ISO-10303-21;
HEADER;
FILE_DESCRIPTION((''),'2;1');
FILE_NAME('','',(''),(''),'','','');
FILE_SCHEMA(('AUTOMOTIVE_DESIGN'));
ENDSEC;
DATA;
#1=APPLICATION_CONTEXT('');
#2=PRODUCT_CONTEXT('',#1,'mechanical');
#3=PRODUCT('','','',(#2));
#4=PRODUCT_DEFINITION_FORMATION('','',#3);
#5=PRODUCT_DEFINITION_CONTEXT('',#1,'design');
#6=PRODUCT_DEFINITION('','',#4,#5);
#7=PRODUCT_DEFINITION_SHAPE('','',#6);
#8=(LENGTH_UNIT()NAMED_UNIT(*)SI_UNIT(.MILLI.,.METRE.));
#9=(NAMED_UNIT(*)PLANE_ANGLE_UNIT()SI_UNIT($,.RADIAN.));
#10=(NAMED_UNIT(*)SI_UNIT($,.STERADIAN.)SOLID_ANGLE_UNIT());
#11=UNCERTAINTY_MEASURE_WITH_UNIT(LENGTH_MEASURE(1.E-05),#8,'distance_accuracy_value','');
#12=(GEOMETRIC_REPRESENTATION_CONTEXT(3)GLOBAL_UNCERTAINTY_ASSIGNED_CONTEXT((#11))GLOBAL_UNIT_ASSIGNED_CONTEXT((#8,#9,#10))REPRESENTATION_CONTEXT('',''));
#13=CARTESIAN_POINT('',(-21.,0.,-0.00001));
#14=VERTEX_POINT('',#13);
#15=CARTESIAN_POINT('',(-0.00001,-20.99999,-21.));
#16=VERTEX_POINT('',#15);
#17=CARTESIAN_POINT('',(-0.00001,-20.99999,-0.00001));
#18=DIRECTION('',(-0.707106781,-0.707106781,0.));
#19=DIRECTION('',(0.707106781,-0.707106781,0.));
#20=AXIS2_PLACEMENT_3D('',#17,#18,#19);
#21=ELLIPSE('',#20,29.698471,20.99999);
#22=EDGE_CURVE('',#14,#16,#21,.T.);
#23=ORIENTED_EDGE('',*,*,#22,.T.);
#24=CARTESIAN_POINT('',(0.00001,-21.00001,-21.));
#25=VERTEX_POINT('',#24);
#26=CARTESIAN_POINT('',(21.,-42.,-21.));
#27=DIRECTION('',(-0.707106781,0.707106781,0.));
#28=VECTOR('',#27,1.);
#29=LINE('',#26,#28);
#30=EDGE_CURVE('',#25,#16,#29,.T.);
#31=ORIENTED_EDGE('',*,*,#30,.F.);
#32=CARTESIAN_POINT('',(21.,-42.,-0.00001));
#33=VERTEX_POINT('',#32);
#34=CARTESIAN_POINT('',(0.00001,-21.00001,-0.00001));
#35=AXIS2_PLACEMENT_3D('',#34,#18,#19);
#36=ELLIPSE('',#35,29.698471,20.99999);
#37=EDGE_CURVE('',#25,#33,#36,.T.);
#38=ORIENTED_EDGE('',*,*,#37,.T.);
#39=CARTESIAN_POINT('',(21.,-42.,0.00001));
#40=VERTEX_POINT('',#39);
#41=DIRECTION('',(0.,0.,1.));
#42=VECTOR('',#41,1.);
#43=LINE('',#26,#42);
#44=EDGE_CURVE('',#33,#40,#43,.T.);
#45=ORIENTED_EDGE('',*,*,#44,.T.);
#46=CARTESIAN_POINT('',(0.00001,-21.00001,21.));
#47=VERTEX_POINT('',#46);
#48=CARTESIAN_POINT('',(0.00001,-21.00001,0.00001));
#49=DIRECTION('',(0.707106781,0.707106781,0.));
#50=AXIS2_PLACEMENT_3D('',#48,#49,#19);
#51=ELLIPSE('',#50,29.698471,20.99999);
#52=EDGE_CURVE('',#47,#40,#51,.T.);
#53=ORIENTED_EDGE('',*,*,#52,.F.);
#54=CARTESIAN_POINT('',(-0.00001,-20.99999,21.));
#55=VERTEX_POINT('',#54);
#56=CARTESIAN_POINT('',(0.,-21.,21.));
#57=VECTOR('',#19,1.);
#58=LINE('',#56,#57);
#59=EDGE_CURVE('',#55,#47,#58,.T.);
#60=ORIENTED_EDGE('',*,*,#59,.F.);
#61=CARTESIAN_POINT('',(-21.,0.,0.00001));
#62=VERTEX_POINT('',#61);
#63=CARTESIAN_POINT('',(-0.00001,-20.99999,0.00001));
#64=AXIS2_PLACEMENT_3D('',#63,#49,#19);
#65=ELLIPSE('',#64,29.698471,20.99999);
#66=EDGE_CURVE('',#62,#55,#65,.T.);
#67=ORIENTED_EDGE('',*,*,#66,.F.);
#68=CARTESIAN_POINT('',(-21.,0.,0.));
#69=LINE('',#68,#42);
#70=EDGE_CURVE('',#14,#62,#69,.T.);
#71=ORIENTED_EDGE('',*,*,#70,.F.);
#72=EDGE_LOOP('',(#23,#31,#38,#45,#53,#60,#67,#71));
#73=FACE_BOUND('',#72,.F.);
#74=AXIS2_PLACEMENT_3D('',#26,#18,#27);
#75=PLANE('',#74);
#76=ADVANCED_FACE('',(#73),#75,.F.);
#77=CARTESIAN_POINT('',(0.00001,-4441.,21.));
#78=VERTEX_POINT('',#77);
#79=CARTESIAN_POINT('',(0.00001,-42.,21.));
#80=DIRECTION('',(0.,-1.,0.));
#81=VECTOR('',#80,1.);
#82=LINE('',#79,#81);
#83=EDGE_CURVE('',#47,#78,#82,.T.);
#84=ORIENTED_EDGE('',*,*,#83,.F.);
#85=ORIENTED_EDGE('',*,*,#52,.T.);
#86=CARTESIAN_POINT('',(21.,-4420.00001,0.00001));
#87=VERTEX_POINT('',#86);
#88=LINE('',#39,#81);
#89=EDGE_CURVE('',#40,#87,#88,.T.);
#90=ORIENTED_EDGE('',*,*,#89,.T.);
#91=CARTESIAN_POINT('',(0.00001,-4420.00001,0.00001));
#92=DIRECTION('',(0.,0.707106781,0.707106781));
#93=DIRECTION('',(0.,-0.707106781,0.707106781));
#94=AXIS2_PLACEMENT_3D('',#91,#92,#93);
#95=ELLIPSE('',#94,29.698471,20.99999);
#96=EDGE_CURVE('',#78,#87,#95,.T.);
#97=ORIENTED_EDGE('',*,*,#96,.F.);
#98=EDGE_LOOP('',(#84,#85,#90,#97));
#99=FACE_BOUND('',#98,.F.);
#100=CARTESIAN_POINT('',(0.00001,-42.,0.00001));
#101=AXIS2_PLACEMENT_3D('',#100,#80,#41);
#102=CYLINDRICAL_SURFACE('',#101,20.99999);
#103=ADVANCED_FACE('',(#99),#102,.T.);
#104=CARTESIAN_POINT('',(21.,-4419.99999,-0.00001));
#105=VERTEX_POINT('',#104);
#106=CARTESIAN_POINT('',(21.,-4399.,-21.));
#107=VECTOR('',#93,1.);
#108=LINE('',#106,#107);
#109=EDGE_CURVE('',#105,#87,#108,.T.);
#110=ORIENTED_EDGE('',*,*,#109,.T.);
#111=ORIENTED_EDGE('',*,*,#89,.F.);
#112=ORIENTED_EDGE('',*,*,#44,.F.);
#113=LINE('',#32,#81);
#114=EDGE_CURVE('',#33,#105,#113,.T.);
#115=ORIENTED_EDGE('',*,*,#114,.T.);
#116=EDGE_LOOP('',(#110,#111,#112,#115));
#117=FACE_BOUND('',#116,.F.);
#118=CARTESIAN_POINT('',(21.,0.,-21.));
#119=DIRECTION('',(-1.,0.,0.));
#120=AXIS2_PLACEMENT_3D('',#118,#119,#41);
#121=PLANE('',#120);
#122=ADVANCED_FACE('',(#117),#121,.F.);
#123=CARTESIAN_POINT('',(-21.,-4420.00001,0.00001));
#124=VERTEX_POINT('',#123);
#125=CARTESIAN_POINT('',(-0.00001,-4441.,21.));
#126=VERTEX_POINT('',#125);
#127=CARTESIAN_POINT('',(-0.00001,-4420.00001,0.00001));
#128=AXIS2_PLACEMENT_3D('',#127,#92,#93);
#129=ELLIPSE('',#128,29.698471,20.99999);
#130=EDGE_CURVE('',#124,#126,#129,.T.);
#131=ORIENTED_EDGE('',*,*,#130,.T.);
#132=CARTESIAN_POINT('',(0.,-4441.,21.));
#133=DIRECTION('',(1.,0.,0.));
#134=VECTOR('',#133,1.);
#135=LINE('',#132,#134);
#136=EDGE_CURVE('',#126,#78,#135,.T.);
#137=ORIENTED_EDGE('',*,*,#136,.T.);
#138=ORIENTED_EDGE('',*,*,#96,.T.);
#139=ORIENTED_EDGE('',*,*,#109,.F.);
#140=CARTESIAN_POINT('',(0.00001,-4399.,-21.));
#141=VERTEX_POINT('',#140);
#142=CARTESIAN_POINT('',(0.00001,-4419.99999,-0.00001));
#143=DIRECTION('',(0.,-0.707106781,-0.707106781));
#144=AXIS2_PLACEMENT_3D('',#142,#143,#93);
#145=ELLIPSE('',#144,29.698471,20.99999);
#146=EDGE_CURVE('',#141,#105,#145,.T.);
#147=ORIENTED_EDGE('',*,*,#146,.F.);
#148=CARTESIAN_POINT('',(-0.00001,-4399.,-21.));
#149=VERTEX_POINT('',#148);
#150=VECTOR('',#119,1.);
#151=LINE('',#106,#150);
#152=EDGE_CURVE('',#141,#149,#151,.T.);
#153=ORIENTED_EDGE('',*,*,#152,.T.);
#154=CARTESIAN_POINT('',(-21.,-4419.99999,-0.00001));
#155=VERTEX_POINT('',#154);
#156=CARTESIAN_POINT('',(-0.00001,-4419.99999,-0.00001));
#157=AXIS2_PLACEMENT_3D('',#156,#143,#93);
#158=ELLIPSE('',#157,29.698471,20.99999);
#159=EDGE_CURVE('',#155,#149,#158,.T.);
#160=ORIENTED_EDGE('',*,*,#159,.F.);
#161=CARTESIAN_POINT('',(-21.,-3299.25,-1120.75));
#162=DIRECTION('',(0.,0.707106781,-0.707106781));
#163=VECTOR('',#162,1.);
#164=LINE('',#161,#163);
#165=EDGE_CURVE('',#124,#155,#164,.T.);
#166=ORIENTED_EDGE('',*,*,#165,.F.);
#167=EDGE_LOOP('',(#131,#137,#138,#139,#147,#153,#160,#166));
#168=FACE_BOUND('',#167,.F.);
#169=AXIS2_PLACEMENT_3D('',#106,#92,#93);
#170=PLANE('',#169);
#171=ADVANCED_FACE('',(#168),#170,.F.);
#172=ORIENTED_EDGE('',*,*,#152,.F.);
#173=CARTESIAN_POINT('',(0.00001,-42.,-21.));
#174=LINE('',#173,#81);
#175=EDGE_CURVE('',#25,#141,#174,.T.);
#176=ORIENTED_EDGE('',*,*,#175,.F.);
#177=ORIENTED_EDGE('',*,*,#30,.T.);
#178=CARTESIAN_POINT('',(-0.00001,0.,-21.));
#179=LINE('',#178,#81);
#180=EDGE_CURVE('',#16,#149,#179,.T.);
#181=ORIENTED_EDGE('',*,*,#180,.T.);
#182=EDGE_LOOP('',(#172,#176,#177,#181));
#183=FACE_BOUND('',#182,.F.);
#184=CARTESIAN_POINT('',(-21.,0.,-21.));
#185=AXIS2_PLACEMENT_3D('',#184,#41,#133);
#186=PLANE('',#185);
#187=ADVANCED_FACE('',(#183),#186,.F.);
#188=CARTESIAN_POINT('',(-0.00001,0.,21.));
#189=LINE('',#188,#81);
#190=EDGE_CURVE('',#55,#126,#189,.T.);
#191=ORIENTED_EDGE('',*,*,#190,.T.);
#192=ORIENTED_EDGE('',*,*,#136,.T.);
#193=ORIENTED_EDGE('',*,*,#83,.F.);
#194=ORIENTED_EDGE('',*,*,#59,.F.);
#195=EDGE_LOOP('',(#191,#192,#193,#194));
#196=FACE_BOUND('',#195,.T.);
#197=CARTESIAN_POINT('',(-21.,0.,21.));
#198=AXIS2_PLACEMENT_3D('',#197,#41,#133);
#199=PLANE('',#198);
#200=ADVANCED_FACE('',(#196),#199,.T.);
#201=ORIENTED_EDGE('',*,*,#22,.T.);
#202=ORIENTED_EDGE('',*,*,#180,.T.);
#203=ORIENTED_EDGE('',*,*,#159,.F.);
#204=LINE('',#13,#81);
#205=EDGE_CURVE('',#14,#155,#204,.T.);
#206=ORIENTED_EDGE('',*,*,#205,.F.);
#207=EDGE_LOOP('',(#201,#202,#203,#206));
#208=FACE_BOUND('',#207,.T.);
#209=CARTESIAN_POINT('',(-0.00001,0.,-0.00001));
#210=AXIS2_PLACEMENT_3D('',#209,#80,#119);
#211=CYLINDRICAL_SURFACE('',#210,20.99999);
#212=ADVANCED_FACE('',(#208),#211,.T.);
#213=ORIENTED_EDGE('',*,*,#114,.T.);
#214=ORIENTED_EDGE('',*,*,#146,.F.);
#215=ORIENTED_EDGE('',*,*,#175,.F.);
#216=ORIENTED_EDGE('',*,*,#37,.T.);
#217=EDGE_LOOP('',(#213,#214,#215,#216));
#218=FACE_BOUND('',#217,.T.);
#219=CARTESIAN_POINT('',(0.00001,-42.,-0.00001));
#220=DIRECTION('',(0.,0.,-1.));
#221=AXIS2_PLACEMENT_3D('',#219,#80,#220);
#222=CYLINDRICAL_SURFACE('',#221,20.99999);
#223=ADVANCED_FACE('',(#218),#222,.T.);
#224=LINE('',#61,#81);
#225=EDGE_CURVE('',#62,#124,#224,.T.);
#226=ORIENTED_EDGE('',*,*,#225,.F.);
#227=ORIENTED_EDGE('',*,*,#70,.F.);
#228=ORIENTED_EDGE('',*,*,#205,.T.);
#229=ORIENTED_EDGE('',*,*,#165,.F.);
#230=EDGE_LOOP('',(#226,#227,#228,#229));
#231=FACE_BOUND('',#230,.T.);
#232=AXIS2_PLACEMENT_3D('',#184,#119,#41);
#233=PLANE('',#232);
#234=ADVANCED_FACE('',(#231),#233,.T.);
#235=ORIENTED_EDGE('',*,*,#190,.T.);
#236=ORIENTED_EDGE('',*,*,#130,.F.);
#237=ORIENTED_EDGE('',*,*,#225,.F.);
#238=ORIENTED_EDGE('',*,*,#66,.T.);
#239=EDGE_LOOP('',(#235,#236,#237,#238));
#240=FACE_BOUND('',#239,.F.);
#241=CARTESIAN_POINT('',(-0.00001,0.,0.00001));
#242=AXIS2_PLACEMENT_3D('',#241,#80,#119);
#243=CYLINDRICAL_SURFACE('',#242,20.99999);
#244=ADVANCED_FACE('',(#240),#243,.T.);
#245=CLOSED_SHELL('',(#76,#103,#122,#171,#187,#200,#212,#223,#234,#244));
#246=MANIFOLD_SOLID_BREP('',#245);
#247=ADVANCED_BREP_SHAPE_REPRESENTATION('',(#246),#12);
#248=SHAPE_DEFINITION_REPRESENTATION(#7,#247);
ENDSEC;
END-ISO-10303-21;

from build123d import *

# Parameters (mm, degrees)
F0_W     = 42
F0_H     = 42
F1_DEPTH = 4441
F3_DEPTH = 100
F5_DEPTH = 100
F6_R     = 20.99999


# Not quite as in the source:
# - a fillet or chamfer is up to 0.001 mm smaller than in the source, because OpenCascade refuses the exact size


with BuildPart() as f1:
    # F0 (on Front) → F1 (new body)
    with BuildSketch(Plane.XZ):
        Rectangle(F0_W, F0_H)
    extrude(amount=F1_DEPTH)

    # F2 (on face) → F3 (cut)
    with BuildSketch(Plane.YZ.offset(21)):
        Polygon((-4399, -21), (-4441, 21), (-4441, -21), align=None)
    extrude(amount=-F3_DEPTH, mode=Mode.SUBTRACT)

    # F4 (on face) → F5 (cut)
    with BuildSketch(Plane(origin=(0, 0, -21), x_dir=(1, 0, 0), z_dir=(0, 0, -1))):
        Polygon((21, 42), (-21, 0), (21, 0), align=None)
    extrude(amount=-F5_DEPTH, mode=Mode.SUBTRACT)

    # F6 (radius 21 in the source; OpenCascade refuses exactly that, so slightly less here)
    f6_edges = [f1.edges().sort_by_distance(p)[0] for p in [
        (-21, -2199.5, -21),
        (21, -2220.5, -21),
        (-21, -2220.5, 21),
        (21, -2241.5, 21),
    ]]
    fillet(f6_edges, radius=F6_R)


solid = f1.part
